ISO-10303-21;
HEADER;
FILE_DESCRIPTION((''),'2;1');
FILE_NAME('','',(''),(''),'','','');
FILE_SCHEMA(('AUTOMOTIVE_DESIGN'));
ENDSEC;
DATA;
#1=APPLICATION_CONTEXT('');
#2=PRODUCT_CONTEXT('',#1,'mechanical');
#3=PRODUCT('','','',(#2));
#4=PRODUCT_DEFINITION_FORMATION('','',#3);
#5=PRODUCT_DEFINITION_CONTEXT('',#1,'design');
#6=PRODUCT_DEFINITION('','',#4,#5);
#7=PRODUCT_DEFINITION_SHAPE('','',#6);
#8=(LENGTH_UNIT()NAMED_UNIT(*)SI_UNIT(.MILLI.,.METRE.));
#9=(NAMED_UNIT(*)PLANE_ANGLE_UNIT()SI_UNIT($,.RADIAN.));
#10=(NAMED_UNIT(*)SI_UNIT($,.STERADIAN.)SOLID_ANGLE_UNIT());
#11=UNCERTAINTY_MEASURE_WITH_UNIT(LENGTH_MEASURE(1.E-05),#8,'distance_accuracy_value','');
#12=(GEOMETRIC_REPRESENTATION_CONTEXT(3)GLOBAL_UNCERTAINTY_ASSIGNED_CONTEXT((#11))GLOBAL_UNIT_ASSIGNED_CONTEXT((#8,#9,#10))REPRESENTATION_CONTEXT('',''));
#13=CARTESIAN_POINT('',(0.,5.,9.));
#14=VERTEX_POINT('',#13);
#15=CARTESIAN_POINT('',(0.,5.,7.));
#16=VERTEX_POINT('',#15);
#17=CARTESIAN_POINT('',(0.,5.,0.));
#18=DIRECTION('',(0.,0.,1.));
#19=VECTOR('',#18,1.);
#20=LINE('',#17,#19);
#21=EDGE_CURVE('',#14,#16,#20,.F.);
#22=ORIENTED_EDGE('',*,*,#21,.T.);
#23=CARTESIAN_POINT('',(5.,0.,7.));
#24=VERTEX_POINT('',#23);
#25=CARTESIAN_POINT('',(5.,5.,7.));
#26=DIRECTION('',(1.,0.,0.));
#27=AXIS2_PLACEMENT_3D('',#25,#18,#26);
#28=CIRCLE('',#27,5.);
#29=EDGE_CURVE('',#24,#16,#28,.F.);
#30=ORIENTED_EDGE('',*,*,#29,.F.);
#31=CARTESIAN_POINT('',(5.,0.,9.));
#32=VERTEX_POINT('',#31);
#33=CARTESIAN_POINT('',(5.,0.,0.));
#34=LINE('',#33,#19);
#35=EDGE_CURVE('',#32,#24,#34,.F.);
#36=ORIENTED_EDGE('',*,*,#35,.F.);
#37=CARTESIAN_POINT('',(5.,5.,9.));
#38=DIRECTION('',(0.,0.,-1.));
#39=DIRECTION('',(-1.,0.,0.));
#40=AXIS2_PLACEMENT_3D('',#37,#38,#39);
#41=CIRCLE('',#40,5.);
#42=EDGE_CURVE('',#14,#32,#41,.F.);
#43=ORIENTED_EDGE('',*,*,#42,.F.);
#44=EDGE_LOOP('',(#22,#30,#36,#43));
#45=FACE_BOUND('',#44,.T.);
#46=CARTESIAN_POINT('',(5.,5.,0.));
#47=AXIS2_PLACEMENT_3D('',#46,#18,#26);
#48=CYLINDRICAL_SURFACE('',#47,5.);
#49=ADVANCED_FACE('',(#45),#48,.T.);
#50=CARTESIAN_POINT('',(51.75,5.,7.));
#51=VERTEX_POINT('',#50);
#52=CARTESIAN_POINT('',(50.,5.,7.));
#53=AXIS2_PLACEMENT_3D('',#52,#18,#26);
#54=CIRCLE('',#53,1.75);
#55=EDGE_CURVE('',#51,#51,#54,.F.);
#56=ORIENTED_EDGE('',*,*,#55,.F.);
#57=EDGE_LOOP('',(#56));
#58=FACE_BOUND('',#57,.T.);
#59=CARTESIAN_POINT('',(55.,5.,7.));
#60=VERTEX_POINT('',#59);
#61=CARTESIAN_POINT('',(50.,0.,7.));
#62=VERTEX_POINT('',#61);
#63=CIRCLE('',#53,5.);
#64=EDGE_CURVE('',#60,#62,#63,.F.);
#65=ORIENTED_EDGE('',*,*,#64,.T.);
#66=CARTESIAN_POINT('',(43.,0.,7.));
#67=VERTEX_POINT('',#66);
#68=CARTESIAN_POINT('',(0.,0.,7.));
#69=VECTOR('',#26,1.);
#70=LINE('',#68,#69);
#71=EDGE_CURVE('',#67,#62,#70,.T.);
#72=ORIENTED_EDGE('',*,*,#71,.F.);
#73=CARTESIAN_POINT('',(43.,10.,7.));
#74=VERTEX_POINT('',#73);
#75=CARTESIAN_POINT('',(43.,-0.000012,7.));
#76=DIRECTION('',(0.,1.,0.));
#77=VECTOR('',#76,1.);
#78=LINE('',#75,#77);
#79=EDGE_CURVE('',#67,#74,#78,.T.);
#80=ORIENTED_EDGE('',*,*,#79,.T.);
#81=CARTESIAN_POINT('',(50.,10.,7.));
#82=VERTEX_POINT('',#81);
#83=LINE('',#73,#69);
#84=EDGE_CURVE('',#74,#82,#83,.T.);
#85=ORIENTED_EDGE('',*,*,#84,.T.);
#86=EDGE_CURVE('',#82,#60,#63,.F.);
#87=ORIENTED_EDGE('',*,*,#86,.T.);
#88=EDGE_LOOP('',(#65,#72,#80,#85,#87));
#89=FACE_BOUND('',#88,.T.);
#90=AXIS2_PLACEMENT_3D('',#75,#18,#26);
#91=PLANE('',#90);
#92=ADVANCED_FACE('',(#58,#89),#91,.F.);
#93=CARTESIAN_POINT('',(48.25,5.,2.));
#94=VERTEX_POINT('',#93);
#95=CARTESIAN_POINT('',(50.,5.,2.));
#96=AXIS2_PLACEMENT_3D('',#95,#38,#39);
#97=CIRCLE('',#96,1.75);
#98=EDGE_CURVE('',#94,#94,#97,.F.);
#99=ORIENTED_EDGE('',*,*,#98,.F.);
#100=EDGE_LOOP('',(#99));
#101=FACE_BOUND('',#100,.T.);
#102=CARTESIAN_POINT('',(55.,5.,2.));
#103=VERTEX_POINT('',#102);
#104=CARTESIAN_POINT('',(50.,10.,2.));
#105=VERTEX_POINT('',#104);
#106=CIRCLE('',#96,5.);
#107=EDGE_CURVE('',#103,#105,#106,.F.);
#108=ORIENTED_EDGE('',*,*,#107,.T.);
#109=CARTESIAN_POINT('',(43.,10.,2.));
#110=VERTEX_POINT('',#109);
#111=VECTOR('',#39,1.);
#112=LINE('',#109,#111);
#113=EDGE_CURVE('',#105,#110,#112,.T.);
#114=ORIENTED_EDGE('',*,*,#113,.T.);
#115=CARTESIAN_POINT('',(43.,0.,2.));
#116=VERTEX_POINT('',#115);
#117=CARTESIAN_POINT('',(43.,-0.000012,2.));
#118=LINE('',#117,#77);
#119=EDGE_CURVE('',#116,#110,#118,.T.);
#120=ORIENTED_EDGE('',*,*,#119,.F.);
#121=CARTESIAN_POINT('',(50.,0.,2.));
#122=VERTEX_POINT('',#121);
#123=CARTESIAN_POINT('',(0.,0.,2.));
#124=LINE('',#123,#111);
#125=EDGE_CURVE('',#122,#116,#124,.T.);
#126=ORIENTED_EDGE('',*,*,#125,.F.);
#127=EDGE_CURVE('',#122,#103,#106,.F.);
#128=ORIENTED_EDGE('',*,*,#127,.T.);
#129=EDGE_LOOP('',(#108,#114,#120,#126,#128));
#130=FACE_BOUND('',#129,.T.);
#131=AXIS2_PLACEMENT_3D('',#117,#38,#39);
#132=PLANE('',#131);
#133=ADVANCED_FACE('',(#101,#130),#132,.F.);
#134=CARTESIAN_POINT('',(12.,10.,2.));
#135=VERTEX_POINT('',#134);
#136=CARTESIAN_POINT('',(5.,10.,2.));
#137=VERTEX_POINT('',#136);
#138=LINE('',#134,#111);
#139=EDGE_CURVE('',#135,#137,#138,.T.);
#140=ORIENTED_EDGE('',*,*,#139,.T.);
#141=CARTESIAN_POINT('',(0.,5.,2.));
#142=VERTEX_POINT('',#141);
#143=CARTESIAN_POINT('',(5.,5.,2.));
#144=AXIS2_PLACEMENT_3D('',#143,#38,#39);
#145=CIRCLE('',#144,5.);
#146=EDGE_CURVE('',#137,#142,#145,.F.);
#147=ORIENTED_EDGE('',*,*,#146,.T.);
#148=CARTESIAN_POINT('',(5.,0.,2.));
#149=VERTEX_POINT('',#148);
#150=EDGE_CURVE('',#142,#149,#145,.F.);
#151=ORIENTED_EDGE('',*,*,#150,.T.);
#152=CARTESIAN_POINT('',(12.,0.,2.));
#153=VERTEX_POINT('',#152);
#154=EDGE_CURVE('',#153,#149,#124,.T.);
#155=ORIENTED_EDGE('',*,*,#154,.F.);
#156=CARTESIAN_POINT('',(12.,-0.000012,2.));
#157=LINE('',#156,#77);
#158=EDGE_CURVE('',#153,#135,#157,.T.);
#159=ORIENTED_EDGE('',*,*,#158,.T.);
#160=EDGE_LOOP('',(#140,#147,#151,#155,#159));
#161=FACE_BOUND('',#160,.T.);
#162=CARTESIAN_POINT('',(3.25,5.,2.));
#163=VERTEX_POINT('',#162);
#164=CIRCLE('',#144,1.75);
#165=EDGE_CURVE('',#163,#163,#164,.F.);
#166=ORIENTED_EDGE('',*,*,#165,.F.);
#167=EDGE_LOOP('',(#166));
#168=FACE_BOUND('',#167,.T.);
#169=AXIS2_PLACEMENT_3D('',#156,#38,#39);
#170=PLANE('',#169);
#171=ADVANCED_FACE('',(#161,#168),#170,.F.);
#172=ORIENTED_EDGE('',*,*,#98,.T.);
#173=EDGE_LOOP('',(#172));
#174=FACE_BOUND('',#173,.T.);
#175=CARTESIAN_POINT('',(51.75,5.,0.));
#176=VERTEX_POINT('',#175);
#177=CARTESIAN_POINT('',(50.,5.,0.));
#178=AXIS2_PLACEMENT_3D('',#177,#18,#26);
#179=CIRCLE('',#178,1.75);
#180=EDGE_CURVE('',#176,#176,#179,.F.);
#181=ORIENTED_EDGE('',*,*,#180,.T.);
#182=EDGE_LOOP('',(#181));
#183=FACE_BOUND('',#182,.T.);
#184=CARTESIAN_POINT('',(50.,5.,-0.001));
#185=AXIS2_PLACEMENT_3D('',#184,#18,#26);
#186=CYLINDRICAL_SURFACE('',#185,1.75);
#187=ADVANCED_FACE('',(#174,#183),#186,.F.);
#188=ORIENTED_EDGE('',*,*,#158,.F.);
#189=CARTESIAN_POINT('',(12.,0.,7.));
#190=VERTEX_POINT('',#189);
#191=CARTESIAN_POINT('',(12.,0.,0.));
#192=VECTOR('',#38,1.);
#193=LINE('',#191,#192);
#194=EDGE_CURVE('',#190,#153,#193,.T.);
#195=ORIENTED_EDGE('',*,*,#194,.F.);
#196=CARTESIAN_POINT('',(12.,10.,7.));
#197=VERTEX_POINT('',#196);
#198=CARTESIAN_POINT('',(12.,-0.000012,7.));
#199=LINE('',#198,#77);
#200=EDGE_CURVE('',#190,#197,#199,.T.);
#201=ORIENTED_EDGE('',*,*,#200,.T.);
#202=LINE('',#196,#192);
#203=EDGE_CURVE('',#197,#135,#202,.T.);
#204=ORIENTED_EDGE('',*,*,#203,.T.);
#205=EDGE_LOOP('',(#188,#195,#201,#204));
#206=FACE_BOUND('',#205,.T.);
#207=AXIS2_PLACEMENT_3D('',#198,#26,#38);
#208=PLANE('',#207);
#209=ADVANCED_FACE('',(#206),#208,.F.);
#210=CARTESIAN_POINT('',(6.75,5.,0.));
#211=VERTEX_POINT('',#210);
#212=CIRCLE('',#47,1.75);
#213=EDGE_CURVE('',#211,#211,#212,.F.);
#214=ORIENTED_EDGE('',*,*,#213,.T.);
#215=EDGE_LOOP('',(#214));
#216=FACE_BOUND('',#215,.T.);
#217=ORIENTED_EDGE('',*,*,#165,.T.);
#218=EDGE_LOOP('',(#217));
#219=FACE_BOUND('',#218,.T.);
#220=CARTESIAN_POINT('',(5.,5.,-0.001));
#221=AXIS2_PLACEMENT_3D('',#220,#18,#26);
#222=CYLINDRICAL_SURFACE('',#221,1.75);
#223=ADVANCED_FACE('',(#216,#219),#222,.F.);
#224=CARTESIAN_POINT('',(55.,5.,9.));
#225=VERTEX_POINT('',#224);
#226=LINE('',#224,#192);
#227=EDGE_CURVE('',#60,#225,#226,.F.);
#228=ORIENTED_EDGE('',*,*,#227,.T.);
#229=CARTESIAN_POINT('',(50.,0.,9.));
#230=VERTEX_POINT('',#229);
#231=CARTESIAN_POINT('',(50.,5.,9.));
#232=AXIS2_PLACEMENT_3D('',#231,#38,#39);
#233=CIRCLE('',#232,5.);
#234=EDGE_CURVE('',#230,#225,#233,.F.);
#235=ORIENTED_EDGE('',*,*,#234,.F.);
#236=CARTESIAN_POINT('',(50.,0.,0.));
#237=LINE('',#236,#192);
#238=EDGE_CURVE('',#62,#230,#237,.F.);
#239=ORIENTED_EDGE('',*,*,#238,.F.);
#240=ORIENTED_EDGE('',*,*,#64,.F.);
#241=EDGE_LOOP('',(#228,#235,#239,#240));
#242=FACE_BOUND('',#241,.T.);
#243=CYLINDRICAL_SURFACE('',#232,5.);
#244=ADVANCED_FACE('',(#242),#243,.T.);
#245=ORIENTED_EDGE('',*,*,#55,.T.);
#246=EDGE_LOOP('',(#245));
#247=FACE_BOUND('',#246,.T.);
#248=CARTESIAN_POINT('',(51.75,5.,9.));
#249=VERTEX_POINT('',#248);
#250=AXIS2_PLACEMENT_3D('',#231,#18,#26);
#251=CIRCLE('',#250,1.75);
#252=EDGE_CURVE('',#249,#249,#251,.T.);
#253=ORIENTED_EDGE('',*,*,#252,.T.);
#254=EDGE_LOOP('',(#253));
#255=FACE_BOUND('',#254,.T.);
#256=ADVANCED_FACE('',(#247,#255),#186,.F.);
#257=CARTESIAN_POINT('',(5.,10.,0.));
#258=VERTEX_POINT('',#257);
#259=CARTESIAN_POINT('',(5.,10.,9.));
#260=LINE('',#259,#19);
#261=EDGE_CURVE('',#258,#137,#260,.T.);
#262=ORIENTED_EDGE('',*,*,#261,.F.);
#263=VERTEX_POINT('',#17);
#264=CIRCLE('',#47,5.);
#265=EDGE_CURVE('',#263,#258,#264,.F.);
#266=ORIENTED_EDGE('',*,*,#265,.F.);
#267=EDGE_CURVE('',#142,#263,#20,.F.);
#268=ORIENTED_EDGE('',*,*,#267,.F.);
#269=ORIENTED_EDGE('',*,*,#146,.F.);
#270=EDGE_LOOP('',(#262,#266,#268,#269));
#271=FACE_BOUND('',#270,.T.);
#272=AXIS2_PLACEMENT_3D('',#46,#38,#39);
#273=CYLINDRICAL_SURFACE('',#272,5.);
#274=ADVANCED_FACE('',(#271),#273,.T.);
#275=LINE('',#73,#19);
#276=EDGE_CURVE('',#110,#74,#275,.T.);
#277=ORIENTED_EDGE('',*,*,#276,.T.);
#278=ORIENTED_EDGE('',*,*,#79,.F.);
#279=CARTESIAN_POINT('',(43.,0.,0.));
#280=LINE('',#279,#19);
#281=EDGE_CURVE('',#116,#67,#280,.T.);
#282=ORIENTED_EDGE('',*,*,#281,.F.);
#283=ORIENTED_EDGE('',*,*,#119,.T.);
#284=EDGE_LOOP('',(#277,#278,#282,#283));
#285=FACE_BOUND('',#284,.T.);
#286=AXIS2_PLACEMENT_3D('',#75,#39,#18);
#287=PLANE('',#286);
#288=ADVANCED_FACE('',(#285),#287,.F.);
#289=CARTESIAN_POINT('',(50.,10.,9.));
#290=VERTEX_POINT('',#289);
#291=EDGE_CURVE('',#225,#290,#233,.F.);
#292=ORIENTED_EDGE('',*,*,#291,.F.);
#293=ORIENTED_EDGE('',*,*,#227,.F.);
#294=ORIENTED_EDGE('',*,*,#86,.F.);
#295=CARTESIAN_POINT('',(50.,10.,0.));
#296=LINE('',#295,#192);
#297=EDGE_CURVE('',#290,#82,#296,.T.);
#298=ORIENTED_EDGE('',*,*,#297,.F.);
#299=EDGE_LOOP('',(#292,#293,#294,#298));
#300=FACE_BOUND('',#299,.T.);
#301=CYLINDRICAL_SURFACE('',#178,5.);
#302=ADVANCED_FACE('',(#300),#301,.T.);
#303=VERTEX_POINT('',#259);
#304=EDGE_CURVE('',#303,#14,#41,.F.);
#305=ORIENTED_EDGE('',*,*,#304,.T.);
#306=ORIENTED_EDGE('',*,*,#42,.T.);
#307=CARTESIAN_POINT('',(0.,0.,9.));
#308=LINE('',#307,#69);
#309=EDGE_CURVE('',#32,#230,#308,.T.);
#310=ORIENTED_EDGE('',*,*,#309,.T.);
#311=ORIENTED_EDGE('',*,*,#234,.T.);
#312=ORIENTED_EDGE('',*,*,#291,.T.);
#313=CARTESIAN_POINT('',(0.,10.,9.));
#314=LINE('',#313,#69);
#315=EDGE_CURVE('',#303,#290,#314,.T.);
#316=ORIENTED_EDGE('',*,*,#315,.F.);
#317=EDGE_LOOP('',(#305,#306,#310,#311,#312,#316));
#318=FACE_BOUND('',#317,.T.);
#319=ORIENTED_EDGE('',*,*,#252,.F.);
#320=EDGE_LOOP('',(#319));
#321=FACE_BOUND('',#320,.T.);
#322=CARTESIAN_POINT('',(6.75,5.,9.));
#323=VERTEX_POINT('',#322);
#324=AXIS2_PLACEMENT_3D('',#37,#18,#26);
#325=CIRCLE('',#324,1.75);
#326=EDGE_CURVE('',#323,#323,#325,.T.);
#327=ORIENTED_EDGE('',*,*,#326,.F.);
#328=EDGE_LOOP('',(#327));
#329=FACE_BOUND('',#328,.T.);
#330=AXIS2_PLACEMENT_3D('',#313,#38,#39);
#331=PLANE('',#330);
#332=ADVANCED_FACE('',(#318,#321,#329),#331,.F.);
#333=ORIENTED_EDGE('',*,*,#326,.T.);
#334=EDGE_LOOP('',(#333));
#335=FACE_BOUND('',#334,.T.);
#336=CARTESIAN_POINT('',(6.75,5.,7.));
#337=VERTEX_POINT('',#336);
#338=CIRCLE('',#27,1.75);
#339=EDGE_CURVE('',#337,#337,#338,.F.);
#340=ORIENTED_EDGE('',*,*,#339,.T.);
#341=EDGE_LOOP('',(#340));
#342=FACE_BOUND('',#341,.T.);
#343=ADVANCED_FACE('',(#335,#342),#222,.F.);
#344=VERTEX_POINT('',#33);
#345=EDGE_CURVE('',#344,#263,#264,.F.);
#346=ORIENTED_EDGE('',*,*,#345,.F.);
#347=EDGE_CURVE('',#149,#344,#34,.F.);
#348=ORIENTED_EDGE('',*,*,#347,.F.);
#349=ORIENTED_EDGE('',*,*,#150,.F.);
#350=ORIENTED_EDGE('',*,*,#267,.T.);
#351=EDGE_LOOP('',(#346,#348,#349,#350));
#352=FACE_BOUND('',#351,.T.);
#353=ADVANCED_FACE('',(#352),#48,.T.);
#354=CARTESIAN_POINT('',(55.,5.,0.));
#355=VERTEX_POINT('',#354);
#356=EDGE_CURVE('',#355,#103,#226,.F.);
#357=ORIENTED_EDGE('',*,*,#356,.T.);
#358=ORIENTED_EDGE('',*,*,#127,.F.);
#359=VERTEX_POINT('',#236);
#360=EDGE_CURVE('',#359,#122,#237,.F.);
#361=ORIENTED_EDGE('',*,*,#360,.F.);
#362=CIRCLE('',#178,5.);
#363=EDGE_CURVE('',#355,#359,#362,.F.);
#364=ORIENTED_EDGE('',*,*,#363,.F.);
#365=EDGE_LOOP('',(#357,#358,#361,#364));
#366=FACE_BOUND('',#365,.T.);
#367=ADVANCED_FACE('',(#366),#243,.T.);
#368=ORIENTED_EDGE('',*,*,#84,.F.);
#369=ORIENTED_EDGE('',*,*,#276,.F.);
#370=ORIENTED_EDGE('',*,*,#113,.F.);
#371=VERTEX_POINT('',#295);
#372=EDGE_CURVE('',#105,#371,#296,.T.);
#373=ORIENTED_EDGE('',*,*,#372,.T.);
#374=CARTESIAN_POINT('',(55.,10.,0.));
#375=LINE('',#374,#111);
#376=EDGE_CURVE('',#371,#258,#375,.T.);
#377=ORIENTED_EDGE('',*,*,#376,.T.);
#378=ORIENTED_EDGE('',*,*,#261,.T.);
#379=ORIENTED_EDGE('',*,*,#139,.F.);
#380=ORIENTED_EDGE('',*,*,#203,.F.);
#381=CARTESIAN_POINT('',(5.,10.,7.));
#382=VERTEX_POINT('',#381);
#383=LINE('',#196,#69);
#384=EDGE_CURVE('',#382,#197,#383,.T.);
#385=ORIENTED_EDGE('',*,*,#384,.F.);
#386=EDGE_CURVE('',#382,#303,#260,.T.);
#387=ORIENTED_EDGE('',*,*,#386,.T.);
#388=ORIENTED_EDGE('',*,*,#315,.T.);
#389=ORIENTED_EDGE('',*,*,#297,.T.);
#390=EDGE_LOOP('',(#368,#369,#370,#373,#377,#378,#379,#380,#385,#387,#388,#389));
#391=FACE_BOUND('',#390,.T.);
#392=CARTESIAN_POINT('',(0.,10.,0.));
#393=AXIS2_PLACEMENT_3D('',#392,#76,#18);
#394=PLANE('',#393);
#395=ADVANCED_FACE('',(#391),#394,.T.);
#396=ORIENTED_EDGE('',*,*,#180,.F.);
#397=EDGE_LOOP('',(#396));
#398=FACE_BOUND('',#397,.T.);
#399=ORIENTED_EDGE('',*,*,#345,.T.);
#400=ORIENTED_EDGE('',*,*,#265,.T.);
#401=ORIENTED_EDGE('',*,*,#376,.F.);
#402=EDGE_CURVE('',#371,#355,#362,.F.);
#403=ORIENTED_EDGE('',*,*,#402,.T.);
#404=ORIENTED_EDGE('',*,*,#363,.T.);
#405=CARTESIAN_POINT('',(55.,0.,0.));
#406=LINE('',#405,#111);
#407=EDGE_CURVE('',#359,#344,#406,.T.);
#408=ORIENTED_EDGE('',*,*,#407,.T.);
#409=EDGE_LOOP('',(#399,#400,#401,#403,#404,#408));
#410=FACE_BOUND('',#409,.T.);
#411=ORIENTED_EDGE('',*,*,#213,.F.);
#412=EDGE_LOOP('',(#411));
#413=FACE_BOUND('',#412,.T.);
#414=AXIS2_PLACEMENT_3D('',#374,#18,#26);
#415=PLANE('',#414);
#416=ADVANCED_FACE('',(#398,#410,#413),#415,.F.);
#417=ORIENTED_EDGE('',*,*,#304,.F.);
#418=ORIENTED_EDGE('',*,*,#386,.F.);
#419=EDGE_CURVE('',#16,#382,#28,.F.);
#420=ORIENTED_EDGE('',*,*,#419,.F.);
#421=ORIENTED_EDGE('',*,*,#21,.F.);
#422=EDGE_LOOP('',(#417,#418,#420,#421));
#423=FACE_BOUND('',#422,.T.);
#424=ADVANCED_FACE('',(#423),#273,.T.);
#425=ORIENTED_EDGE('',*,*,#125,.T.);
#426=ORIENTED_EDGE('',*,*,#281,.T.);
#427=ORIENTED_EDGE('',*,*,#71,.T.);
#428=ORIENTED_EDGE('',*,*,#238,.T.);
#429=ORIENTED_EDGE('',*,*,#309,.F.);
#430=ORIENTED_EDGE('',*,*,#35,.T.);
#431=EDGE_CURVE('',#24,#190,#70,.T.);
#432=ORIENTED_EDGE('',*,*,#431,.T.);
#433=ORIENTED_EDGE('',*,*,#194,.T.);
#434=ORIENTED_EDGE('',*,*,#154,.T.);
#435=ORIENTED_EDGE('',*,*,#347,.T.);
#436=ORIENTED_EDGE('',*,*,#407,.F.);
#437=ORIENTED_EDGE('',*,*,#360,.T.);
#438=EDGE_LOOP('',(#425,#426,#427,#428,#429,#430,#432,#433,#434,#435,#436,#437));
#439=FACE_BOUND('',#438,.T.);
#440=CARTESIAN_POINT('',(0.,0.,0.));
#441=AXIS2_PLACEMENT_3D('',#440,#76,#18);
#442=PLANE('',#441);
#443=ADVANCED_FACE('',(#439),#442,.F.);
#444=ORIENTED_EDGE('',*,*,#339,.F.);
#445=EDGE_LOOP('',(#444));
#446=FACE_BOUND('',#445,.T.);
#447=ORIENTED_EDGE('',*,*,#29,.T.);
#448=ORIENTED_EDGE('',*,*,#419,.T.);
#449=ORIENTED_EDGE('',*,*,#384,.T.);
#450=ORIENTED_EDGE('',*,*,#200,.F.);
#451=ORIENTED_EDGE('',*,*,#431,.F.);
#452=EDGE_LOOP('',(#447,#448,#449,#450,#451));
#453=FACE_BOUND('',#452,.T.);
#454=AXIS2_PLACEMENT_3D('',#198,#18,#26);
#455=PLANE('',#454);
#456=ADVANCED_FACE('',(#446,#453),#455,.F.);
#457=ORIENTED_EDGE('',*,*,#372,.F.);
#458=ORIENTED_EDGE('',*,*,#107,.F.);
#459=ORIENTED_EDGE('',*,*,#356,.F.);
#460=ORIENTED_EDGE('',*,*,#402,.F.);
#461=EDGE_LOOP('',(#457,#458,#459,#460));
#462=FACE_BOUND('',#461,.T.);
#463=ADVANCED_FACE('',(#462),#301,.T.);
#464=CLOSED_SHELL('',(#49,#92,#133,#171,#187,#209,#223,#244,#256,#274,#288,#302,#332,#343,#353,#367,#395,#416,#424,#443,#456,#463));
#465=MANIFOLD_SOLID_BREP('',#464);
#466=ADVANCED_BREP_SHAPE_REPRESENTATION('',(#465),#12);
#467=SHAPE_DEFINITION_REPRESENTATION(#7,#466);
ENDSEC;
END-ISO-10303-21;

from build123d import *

# Parameters (mm, degrees)
SKETCH_5_W               = 55
SKETCH_5_H               = 9
EXTRUDE_1_DEPTH          = 10
FILLET_2_R               = 5
CUT_EXTRUDE_1_REACH      = 58.622
SKETCH_6_R               = 1.75
CUT_EXTRUDE_4_DEPTH      = 57.621550668
CUT_EXTRUDE_4_DEPTH_BACK = 57.621550668
SKETCH_7_W               = 12
SKETCH_7_H               = 5


with BuildPart() as part:
    # 草图5 → 凸台-拉伸1 (new body)
    with BuildSketch(Plane(origin=(0, 0, 0), x_dir=(1, 0, 0), z_dir=(0, 1, 0))):
        with Locations((27.5, -4.5)):
            Rectangle(SKETCH_5_W, SKETCH_5_H)
    extrude(amount=EXTRUDE_1_DEPTH)

    # 圆角2
    fillet_2_edges = [part.edges().sort_by_distance(p)[0] for p in [
        (55, 0, 4.5),
        (55, 10, 4.5),
        (0, 0, 4.5),
        (0, 10, 4.5),
    ]]
    fillet(fillet_2_edges, radius=FILLET_2_R - 0.0001)  # a hair under: the kernel refuses the full size

    # 草图6 → 切除-拉伸1 (cut, up to next)
    with BuildSketch(Plane.XY.offset(9), mode=Mode.PRIVATE) as cut_extrude_1_sk1:
        with Locations((5, 5)):
            Circle(SKETCH_6_R)
    cut_extrude_1_tool1 = extrude(cut_extrude_1_sk1.sketch, amount=-CUT_EXTRUDE_1_REACH, mode=Mode.PRIVATE) & part.part
    # 草图6 → 切除-拉伸1 (cut, up to next)
    with BuildSketch(Plane.XY.offset(9), mode=Mode.PRIVATE) as cut_extrude_1_sk2:
        with Locations((50, 5)):
            Circle(SKETCH_6_R)
    cut_extrude_1_tool2 = extrude(cut_extrude_1_sk2.sketch, amount=-CUT_EXTRUDE_1_REACH, mode=Mode.PRIVATE) & part.part
    add(cut_extrude_1_tool1.solids().sort_by_distance((5, 5, 9))[0], mode=Mode.SUBTRACT)
    add(cut_extrude_1_tool2.solids().sort_by_distance((50, 5, 9))[0], mode=Mode.SUBTRACT)

    # 草图7 → 切除-拉伸4 (cut, two sides: drawn at the far end of the back side and taken through both)
    with BuildSketch(Plane(origin=(0, 0, 0), x_dir=(1, 0, 0), z_dir=(0, 1, 0)).offset(-CUT_EXTRUDE_4_DEPTH_BACK)):
        with Locations((6, -4.5)):
            Rectangle(SKETCH_7_W, SKETCH_7_H)
        with Locations((49, -4.5)):
            Rectangle(SKETCH_7_W, SKETCH_7_H)
    extrude(amount=CUT_EXTRUDE_4_DEPTH + CUT_EXTRUDE_4_DEPTH_BACK, mode=Mode.SUBTRACT)


solid = part.part
